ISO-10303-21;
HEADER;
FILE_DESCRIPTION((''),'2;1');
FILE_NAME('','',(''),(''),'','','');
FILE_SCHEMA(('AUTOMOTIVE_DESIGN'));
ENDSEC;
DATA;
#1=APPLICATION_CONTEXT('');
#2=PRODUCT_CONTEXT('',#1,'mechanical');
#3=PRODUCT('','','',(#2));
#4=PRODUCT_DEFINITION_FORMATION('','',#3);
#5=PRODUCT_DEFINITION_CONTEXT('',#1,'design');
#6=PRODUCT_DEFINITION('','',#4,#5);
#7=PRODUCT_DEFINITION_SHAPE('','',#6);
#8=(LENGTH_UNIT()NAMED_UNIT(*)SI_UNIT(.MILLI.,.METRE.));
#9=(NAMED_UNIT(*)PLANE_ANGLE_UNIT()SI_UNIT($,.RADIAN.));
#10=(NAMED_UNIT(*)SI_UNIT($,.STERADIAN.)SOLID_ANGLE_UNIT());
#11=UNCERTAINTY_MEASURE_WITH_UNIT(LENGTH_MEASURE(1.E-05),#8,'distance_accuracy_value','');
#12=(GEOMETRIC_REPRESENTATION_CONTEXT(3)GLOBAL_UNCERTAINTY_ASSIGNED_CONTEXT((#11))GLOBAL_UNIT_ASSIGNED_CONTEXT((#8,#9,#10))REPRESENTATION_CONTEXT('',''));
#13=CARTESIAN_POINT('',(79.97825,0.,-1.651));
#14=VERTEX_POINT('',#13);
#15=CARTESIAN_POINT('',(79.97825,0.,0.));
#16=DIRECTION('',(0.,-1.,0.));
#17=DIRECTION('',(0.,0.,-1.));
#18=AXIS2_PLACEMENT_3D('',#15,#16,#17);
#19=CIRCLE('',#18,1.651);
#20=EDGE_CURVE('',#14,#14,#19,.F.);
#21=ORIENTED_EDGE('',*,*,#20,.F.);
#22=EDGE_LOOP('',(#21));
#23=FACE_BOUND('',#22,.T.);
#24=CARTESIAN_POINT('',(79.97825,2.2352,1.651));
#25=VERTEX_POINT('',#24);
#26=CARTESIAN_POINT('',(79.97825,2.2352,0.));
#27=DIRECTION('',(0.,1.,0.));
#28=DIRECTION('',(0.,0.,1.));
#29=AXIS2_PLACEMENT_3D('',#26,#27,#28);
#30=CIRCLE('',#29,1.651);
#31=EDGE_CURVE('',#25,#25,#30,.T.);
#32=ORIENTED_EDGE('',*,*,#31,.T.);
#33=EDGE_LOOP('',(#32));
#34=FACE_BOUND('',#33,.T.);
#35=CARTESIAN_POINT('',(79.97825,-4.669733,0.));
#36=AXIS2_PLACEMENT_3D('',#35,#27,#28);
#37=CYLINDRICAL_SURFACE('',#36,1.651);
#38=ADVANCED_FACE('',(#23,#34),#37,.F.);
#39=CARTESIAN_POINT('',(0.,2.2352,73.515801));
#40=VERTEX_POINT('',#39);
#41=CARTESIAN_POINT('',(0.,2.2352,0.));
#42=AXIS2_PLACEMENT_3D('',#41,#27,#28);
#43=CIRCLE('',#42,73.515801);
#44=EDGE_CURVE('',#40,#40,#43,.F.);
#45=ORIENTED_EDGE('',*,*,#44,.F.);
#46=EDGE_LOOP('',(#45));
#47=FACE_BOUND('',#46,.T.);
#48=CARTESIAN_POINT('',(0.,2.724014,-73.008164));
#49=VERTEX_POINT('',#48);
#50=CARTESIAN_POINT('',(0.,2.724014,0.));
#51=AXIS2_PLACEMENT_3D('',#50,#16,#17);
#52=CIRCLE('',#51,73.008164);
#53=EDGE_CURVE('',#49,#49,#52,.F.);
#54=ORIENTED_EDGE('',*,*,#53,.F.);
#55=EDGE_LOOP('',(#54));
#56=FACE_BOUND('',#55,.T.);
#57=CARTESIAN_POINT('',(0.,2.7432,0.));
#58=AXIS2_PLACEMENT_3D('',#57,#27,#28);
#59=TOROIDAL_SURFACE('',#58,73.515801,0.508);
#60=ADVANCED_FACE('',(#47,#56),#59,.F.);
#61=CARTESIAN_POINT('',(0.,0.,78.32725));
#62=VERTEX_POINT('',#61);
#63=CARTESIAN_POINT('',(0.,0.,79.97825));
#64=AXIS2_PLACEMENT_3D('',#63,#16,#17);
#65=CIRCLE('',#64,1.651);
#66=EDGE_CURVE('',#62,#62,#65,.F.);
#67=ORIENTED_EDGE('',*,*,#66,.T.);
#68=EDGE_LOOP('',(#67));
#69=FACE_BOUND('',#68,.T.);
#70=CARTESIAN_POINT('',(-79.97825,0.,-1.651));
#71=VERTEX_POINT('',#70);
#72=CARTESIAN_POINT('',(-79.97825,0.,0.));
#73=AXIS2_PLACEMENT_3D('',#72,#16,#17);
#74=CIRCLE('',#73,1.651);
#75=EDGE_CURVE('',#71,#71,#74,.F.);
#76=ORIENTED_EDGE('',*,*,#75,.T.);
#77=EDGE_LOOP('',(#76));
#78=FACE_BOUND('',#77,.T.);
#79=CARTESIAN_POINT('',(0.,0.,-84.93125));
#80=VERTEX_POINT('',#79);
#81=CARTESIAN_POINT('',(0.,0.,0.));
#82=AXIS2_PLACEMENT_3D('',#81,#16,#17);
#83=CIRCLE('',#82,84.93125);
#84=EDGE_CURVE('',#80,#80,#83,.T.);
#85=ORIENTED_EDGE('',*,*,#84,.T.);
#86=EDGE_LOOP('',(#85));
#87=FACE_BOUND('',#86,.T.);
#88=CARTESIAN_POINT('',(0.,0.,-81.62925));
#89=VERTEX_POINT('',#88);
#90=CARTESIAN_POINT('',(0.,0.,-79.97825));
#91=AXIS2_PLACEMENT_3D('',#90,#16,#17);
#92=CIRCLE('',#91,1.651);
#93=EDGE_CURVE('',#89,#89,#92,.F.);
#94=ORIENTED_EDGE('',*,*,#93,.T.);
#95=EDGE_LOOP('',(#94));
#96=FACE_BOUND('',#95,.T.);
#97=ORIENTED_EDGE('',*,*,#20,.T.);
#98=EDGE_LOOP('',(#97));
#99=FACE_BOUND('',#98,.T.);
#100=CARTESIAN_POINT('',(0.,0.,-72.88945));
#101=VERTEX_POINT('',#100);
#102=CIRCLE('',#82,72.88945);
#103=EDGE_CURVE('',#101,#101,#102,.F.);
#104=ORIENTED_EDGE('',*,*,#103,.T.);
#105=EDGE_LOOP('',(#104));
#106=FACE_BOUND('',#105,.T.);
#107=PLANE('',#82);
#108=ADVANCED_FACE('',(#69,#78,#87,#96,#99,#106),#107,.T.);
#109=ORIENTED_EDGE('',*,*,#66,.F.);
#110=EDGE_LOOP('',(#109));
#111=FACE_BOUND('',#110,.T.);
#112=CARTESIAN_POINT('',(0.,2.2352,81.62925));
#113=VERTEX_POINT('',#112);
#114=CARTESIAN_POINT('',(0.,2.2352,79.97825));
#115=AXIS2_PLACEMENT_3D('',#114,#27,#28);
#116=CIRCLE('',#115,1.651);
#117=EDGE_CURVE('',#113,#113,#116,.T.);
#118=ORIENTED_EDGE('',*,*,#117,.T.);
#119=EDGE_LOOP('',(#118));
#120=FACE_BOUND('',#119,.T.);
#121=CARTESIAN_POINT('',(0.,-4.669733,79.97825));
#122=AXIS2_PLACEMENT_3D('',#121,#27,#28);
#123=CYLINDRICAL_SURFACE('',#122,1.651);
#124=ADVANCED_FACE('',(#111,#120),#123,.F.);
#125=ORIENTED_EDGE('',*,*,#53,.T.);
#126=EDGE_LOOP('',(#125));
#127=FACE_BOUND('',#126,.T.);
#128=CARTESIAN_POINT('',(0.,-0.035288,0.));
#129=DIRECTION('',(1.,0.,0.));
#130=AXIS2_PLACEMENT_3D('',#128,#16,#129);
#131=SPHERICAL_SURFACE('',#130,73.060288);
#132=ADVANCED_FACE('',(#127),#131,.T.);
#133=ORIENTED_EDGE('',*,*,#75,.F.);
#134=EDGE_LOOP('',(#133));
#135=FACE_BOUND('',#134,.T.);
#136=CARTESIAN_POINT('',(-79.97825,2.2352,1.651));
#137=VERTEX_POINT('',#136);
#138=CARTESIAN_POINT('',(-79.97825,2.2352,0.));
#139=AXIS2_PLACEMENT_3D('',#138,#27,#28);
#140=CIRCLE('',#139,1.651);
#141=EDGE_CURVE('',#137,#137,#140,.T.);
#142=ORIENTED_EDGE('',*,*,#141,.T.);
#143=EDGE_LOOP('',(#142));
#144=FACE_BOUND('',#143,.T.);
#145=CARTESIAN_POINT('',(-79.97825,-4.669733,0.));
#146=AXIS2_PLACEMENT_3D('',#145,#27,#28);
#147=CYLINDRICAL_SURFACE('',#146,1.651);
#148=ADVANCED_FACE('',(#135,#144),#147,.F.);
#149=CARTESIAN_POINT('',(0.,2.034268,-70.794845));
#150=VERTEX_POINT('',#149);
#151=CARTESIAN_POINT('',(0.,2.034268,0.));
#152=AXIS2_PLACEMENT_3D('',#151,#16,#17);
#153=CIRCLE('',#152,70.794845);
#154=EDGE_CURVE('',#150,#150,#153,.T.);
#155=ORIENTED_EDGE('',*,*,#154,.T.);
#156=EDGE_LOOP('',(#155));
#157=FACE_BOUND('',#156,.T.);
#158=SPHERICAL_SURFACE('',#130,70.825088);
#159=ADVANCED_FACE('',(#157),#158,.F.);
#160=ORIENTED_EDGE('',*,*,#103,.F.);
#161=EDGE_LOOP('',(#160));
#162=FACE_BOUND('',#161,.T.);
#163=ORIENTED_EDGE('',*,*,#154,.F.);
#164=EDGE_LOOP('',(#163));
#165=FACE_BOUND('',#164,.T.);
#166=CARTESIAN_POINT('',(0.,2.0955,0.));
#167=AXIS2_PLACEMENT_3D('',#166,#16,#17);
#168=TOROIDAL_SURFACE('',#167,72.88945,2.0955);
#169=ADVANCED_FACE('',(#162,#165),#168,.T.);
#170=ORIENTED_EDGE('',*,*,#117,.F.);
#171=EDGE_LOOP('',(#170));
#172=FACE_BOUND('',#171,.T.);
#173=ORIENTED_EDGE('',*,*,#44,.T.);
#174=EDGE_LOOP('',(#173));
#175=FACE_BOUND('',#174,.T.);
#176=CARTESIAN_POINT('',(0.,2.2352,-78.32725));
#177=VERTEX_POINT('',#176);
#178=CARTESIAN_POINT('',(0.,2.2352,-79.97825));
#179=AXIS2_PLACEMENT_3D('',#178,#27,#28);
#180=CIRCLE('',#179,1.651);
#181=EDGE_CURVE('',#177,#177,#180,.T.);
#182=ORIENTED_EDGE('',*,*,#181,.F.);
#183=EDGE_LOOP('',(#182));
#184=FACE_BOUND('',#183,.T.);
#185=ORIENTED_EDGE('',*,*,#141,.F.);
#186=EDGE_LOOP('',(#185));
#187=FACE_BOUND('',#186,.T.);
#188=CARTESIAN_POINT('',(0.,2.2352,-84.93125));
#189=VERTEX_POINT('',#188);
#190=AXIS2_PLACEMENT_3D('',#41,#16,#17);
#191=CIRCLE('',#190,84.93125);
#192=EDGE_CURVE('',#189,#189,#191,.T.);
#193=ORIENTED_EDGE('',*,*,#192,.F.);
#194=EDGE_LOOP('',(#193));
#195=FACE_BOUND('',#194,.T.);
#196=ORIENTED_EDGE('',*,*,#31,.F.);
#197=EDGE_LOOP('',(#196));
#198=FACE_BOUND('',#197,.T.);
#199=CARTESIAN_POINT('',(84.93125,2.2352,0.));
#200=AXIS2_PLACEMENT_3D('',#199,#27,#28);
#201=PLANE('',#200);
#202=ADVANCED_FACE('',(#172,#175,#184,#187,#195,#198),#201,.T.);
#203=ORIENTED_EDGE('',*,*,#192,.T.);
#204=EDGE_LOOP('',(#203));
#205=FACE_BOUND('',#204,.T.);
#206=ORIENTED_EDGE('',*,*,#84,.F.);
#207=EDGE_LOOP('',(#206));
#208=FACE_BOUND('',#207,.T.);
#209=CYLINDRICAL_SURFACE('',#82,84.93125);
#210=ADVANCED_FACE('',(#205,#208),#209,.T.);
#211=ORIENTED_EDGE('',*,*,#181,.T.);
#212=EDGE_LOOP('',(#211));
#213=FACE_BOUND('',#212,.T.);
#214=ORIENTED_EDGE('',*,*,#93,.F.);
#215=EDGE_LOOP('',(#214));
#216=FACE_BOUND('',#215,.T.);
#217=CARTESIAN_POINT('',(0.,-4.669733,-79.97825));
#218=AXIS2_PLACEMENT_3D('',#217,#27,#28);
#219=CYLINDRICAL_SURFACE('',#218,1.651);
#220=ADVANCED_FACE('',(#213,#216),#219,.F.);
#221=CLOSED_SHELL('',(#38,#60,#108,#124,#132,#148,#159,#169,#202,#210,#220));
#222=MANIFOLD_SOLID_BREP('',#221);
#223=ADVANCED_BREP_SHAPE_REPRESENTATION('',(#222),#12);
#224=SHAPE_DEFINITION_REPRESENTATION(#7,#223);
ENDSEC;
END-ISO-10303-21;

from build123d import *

# Parameters (mm, degrees)
SKETCH2_R        = 1.651
DOME_HOLES_DEPTH = 2.2352
FILLET1_R        = 2.0955
FILLET2_R        = 0.508


# Read off the part's stored shape, not the designer's step: Shell1
with BuildPart() as part:
    # Sketch1 → Revolve1 (revolve)
    with BuildSketch(Plane.XY):
        with BuildLine():
            Line((0, 0), (0, 73.025))
            ThreePointArc((0, 73.025), (50.852351, 52.42273424), (73.025, 2.2352))
            Line((73.025, 2.2352), (84.93125, 2.2352))
            Line((84.93125, 2.2352), (84.93125, 0))
            Line((84.93125, 0), (0, 0))
        make_face()
    revolve(axis=Axis((0, 0, 0), (0, 1, 0)))

    # Shell1 outline → Shell1 (revolve, cut)
    with BuildSketch(Plane.XY):
        with BuildLine():
            Line((0, -7.1e-08), (70.825079619, -7.1e-08))
            ThreePointArc((70.825079619, -7.1e-08), (50.068422427, 50.058086641), (0, 70.7898))
            Line((0, 70.7898), (0, -7.1e-08))
        make_face()
    revolve(axis=Axis((0, 0, 0), (0, 1, 0)), mode=Mode.SUBTRACT)

    # Sketch2 → Dome Holes (cut)
    with BuildSketch(Plane(origin=(0, 2.2352, 0), x_dir=(1, 0, 0), z_dir=(0, 1, 0))):
        with Locations(Location((0, 79.97825, 0), (0, 0, 270))):
            Circle(SKETCH2_R)
        with Locations(Location((79.97825, 0, 0), (0, 0, 270))):
            Circle(SKETCH2_R)
        with Locations(Location((0, -79.97825, 0), (0, 0, 270))):
            Circle(SKETCH2_R)
        with Locations(Location((-79.97825, 0, 0), (0, 0, 270))):
            Circle(SKETCH2_R)
    extrude(amount=-DOME_HOLES_DEPTH, mode=Mode.SUBTRACT)

    # Fillet1
    fillet1_edges = [part.edges().sort_by_distance(p)[0] for p in [
        (-70.825079619, -7.1e-08, 0),
    ]]
    fillet(fillet1_edges, radius=FILLET1_R)

    # Fillet2
    fillet2_edges = [part.edges().sort_by_distance(p)[0] for p in [
        (-73.025, 2.2352, 0),
    ]]
    fillet(fillet2_edges, radius=FILLET2_R)


solid = part.part
